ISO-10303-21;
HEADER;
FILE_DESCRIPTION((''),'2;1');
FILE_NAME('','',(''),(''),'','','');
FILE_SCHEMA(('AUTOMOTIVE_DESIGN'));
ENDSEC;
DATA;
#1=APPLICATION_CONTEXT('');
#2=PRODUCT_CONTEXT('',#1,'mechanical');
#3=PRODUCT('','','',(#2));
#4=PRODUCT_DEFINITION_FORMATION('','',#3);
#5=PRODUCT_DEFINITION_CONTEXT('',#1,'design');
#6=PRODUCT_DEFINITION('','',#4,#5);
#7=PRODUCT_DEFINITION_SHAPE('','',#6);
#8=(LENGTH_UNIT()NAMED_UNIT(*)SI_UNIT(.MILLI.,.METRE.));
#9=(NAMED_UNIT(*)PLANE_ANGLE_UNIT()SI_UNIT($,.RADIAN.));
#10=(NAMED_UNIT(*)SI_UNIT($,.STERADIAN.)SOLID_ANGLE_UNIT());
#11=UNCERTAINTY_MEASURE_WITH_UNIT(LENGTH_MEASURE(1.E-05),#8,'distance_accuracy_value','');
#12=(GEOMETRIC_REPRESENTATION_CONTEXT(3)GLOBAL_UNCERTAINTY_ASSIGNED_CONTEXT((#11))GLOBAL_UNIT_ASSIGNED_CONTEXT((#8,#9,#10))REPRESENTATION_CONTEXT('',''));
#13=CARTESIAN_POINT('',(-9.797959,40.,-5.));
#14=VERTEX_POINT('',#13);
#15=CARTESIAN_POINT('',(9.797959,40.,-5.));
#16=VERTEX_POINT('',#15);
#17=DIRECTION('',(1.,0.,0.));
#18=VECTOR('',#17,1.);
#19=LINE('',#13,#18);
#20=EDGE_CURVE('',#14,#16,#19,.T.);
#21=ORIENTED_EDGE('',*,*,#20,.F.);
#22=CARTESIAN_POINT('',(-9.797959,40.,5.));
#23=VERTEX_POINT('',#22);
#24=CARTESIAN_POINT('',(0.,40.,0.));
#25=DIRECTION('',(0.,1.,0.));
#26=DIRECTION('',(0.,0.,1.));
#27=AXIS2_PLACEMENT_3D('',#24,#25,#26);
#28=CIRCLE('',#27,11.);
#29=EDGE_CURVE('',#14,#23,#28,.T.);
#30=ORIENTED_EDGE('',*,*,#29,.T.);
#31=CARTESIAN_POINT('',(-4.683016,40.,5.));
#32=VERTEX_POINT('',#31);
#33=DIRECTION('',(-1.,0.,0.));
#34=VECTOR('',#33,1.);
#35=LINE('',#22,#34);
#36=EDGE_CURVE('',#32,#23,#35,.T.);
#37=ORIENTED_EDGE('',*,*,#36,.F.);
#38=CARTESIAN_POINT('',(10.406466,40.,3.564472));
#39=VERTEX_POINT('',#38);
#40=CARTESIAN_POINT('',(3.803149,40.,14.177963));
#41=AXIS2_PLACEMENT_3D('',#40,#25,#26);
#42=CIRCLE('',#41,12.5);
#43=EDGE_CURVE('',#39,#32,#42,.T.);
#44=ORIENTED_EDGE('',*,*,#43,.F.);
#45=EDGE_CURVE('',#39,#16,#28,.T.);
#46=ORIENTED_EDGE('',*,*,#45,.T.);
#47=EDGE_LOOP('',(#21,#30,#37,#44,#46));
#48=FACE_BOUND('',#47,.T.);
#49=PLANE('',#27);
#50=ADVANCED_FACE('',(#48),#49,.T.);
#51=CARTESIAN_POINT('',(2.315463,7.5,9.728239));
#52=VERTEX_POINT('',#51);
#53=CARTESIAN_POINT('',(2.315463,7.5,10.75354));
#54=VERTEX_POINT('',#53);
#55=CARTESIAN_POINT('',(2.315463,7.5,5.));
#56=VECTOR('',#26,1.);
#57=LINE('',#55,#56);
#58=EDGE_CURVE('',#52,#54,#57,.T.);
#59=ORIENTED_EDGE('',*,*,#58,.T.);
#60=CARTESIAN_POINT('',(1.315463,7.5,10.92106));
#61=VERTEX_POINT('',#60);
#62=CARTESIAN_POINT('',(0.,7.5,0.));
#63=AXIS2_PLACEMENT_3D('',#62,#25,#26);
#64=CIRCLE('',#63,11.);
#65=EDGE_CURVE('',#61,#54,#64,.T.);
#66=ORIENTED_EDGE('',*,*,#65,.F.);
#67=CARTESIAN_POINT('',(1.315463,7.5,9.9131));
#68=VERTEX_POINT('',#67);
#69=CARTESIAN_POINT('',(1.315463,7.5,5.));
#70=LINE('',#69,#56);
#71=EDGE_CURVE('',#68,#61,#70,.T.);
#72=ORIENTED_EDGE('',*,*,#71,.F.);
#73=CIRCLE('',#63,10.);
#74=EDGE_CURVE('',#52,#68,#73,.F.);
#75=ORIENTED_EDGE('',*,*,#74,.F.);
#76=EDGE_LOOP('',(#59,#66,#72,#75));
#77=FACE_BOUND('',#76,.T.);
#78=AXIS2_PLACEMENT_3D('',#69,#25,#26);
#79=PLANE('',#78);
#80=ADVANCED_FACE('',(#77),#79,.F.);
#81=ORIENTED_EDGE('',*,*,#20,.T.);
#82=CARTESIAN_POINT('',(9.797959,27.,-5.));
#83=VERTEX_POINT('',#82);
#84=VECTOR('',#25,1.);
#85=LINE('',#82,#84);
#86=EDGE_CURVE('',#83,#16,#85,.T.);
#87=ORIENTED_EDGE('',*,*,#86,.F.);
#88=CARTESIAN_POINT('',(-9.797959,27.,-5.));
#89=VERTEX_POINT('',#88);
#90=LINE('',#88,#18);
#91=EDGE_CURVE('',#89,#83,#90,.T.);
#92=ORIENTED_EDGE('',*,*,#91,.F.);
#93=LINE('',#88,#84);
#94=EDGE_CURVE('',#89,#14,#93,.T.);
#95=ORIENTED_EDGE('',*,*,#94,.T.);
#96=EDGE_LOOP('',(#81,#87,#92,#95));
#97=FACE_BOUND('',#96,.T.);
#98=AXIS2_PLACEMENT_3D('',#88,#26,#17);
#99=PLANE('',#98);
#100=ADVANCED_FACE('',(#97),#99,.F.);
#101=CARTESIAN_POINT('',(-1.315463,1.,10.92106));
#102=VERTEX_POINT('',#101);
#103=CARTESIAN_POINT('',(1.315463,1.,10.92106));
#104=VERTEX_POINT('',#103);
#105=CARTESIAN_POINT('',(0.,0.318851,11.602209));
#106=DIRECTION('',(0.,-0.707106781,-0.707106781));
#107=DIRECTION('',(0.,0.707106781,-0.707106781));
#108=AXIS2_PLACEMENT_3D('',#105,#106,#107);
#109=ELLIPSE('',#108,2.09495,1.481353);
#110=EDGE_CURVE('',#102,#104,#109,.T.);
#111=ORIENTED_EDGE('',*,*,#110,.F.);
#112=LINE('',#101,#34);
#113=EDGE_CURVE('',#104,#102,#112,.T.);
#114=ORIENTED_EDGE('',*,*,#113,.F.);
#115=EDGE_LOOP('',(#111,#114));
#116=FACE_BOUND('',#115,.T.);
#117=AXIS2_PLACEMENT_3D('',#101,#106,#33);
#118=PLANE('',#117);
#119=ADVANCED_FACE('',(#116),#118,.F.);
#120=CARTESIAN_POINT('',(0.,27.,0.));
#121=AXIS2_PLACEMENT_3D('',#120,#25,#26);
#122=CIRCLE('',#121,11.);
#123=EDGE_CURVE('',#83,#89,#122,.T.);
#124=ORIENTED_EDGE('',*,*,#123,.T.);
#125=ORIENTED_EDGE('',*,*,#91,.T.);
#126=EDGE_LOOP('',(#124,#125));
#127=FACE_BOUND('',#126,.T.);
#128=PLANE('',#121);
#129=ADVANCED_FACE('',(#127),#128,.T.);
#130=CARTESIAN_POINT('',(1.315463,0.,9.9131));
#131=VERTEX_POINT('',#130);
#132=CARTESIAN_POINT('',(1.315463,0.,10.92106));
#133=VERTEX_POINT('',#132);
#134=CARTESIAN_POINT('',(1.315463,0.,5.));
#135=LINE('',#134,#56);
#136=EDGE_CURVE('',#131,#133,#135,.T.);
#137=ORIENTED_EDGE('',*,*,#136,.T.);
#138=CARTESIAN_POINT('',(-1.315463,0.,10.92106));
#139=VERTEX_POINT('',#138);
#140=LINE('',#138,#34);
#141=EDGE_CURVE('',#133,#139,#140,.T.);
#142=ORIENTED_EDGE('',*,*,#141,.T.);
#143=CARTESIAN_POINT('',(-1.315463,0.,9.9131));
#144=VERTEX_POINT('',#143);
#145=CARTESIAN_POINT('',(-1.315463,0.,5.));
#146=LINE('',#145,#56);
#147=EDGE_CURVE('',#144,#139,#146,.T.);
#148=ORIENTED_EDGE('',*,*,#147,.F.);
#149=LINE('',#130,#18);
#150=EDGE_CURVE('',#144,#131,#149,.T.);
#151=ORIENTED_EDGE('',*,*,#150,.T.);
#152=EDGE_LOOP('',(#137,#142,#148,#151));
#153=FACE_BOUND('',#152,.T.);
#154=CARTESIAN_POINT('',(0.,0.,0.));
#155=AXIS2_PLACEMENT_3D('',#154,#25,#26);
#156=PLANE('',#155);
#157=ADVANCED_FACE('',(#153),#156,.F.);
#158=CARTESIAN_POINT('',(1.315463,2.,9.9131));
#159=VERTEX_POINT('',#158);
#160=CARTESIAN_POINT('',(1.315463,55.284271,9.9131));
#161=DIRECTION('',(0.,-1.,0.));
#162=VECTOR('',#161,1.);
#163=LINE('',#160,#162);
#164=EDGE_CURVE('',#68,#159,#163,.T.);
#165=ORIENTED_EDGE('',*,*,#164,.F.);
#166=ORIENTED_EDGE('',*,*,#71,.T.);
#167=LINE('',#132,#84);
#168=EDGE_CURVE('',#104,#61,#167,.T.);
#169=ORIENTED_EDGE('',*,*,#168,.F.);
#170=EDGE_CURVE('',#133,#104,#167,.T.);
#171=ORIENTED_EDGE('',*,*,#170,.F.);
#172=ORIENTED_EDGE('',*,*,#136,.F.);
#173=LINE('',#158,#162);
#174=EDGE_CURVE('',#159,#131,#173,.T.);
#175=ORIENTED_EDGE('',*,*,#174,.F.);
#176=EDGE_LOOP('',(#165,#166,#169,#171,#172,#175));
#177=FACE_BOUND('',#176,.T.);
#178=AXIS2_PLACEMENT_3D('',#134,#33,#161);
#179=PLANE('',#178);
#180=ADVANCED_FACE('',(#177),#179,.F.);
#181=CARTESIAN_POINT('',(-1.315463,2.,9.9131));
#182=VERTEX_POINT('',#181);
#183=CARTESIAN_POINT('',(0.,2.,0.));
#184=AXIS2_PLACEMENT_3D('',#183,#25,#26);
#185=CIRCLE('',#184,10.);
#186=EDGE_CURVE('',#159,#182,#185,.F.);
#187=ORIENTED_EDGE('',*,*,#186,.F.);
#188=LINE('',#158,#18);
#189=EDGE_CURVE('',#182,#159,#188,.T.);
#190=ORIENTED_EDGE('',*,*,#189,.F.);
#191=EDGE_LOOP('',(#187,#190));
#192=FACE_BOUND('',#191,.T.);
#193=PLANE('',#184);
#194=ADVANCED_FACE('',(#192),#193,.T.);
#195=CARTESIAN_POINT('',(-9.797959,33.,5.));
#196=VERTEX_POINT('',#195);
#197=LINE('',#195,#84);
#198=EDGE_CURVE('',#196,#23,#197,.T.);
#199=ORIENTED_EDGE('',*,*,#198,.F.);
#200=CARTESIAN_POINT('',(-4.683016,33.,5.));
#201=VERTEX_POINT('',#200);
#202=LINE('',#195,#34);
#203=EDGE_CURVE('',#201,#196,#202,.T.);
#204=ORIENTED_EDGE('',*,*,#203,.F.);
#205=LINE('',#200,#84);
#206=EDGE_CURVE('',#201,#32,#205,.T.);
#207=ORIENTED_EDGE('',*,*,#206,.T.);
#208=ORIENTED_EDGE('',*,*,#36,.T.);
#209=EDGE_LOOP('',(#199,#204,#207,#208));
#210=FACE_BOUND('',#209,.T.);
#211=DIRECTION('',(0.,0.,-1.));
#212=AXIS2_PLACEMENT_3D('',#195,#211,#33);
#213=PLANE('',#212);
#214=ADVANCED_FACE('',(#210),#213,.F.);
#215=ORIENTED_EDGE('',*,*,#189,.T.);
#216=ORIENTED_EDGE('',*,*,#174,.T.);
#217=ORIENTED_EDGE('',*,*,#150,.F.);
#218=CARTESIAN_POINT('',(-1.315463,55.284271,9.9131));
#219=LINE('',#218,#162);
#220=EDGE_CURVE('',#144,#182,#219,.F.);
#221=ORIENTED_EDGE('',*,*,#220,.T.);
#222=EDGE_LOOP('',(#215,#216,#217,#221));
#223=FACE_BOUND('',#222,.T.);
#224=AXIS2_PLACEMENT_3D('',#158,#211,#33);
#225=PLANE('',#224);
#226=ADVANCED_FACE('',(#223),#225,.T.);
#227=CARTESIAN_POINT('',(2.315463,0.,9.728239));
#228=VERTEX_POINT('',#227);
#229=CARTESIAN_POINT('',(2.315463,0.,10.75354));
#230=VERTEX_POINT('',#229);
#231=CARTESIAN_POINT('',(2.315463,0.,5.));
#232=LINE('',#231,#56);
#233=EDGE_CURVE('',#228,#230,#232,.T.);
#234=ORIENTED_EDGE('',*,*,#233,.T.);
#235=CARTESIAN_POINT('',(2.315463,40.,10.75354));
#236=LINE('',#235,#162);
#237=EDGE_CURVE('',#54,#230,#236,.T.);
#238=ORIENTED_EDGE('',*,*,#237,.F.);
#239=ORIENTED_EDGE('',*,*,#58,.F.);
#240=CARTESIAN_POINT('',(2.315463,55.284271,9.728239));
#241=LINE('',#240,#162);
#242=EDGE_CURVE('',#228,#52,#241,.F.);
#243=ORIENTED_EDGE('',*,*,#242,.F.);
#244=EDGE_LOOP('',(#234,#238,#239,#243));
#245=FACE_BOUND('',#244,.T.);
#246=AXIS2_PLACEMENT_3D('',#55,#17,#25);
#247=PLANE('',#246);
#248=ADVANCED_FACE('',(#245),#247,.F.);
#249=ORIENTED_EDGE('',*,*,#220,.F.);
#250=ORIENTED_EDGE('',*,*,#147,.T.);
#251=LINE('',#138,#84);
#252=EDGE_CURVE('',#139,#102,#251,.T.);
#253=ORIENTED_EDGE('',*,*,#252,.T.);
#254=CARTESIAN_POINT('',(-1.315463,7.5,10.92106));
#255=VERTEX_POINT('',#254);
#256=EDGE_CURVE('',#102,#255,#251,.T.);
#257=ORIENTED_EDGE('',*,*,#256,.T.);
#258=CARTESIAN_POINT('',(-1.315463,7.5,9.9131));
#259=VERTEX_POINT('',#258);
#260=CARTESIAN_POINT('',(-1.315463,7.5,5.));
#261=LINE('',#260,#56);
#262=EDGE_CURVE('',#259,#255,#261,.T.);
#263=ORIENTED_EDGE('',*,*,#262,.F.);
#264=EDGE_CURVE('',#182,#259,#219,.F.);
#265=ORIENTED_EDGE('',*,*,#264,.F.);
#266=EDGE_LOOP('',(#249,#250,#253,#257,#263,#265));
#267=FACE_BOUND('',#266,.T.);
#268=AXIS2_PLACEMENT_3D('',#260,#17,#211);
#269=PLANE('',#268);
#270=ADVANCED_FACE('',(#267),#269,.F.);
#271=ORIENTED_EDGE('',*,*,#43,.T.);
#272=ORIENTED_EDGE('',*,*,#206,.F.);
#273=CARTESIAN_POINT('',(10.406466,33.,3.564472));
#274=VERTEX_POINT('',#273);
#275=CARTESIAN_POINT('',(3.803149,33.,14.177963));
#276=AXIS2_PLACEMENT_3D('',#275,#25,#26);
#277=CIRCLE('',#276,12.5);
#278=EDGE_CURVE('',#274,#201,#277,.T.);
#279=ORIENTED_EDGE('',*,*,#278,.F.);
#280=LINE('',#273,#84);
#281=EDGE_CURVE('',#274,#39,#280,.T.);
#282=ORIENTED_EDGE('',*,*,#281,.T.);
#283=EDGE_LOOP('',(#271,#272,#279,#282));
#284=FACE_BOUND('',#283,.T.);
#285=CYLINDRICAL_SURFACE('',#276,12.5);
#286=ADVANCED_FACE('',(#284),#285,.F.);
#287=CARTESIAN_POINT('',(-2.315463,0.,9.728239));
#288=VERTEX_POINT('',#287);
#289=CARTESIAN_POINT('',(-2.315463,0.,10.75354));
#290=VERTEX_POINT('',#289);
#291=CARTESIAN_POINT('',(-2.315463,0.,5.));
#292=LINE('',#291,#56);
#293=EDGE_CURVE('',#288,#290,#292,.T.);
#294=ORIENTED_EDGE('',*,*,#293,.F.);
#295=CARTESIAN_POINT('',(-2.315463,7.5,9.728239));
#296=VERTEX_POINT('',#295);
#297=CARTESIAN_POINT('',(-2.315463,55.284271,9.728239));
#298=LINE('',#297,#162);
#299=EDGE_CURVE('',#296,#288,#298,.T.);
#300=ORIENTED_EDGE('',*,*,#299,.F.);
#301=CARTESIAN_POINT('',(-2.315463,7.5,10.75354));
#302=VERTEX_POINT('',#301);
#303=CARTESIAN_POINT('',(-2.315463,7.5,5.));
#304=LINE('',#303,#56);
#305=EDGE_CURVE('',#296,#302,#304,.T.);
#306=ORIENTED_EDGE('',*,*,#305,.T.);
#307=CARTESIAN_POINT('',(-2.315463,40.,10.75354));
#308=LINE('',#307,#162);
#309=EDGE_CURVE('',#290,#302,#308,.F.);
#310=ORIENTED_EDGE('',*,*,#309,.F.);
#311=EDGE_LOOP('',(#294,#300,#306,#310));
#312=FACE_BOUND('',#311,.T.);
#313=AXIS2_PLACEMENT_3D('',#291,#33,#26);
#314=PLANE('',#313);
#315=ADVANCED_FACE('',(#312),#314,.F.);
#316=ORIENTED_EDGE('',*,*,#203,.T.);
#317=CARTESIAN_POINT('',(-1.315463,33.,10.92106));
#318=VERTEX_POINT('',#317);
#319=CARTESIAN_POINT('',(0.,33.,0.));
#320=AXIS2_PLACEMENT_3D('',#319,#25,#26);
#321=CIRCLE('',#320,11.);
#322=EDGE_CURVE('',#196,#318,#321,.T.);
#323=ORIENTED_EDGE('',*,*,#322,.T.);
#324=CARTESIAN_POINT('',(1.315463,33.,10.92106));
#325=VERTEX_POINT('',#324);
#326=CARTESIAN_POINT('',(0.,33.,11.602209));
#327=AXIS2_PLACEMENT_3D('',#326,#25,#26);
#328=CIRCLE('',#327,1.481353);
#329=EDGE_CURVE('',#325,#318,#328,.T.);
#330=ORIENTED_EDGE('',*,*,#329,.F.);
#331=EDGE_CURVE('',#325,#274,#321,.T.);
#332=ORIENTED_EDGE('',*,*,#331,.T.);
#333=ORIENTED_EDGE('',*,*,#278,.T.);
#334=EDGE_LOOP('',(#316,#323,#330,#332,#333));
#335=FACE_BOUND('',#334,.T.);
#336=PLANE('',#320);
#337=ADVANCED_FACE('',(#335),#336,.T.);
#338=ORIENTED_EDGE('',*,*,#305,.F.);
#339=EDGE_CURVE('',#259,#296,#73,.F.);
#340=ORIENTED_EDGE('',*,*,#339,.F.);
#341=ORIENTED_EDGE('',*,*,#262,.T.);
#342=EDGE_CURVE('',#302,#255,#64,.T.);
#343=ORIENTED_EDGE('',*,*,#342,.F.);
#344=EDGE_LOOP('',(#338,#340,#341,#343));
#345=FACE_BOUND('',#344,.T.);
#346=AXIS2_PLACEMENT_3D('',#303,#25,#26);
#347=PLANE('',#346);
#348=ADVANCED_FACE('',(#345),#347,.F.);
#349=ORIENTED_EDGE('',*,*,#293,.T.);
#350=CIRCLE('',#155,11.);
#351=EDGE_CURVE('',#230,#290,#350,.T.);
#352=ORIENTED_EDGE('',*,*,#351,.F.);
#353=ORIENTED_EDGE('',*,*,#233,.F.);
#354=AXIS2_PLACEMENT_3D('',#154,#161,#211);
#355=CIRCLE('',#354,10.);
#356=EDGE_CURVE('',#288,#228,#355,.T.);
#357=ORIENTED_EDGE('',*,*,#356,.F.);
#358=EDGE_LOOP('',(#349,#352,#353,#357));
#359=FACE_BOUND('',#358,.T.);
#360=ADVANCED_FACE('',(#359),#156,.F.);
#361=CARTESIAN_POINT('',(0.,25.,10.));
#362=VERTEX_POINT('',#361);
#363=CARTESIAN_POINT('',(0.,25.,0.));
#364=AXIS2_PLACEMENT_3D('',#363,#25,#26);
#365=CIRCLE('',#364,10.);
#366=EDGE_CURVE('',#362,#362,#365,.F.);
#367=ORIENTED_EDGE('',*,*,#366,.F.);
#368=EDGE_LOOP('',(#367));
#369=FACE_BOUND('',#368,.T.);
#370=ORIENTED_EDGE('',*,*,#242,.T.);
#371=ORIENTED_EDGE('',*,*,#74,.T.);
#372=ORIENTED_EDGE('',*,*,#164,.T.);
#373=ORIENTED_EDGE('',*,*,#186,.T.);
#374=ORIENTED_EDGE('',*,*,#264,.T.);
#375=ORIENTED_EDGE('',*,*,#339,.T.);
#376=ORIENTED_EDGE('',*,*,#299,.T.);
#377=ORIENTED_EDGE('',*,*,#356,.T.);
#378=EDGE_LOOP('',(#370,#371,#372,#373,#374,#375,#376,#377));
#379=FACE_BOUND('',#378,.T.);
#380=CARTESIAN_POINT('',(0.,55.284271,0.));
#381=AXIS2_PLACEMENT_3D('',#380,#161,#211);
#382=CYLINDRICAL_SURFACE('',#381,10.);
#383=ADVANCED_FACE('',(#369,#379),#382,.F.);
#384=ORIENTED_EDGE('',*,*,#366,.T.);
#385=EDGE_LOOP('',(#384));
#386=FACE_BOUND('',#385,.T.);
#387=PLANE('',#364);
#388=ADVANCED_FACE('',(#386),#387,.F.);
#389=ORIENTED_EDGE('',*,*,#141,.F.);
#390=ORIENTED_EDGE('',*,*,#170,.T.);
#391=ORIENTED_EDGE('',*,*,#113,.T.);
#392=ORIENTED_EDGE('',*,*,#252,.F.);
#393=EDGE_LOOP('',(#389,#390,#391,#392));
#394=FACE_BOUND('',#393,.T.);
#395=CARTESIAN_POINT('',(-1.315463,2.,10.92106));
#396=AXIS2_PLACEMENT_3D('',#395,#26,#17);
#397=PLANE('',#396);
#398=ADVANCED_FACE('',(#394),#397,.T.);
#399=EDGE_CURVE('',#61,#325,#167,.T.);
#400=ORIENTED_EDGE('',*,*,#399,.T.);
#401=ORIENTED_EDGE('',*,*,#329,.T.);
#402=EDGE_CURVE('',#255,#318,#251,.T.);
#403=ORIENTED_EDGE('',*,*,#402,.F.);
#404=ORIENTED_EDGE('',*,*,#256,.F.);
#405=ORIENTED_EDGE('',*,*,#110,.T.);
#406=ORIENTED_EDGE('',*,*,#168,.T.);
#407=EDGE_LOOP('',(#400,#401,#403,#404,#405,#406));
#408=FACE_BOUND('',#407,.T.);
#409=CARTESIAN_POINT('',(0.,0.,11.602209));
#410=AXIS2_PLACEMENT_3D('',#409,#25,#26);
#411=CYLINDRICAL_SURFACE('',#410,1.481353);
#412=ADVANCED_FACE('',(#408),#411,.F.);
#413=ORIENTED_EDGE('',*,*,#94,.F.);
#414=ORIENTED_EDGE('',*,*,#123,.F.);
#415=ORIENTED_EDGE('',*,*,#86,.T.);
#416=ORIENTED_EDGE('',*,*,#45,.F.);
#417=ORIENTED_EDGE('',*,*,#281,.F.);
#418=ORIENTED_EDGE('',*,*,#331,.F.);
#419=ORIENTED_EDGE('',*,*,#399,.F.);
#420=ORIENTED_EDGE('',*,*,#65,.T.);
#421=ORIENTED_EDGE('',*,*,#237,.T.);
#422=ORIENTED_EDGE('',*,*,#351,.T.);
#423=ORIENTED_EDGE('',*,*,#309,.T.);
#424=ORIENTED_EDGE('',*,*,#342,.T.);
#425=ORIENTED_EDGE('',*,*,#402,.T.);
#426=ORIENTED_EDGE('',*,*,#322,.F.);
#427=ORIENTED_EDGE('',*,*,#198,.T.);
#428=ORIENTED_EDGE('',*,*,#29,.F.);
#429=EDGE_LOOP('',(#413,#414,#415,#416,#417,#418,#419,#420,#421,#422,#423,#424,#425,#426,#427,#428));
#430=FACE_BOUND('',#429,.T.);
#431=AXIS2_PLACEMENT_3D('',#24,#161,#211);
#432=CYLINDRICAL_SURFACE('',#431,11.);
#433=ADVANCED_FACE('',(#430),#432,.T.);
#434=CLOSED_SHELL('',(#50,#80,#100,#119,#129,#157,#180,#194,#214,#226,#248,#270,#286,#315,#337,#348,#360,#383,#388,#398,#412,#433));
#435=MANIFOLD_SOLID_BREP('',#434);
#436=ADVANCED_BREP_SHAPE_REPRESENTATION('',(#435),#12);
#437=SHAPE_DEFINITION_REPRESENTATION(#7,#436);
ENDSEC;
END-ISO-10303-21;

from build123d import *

# Parameters (mm, degrees)
SKETCH1_R           = 11
BOSS_EXTRUDE1_DEPTH = 40
CUT_EXTRUDE1_START  = -13
CUT_EXTRUDE1_DEPTH  = 13
CUT_EXTRUDE2_START  = -7
CUT_EXTRUDE2_DEPTH  = 7
CUT_EXTRUDE3_DEPTH  = 37.482872694
SKETCH6_R           = 10
CUT_EXTRUDE4_DEPTH  = 25
SKETCH7_W           = 1
SKETCH7_H           = 7.5
CUT_EXTRUDE5_DEPTH  = 7
SKETCH8_W           = 2.630926858
SKETCH8_H           = 1.007959983
BOSS_EXTRUDE2_DEPTH = 2
CHAMFER1_SIZE       = 1


with BuildPart() as part:
    # Sketch1 → Boss-Extrude1 (new body)
    with BuildSketch(Plane(origin=(0, 0, 0), x_dir=(1, 0, 0), z_dir=(0, 1, 0))):
        with Locations(Location((0, 0, 0), (0, 0, 270))):
            Circle(SKETCH1_R)
    extrude(amount=BOSS_EXTRUDE1_DEPTH)

    # Sketch2 → Cut-Extrude1 (cut)
    with BuildSketch(Plane(origin=(0, 40, 0), x_dir=(1, 0, 0), z_dir=(0, 1, 0)).offset(CUT_EXTRUDE1_START)):
        with BuildLine():
            Line((-9.797958971, 5), (9.797958971, 5))
            ThreePointArc((9.797958971, 5), (0, 11), (-9.797958971, 5))
        make_face()
    extrude(amount=CUT_EXTRUDE1_DEPTH, mode=Mode.SUBTRACT)

    # Sketch3 → Cut-Extrude2 (cut)
    with BuildSketch(Plane(origin=(0, 40, 0), x_dir=(1, 0, 0), z_dir=(0, 1, 0)).offset(CUT_EXTRUDE2_START)):
        with BuildLine():
            Line((-9.797958971, -5), (-4.683015841, -5))
            ThreePointArc((-4.683015841, -5), (2.619314521, -1.734147983), (10.406466307, -3.564471772))
            ThreePointArc((10.406466307, -3.564471772), (0.779586825, -10.972339968), (-9.797958971, -5))
        make_face()
    extrude(amount=CUT_EXTRUDE2_DEPTH, mode=Mode.SUBTRACT)

    # Sketch4 → Cut-Extrude3 (cut, through all)
    with BuildSketch(Plane(origin=(0, 33, 0), x_dir=(1, 0, 0), z_dir=(0, 1, 0))):
        with BuildLine():
            ThreePointArc((1.315463429, -10.921060203), (0, -10.120855836), (-1.315463429, -10.921060203))
            ThreePointArc((-1.315463429, -10.921060203), (0, -11), (1.315463429, -10.921060203))
        make_face()
    extrude(amount=-CUT_EXTRUDE3_DEPTH, mode=Mode.SUBTRACT)

    # Sketch6 → Cut-Extrude4 (cut)
    with BuildSketch(Plane.XZ):
        with Locations(Location((0, 0, 0), (0, 0, 270))):
            Circle(SKETCH6_R)
    extrude(amount=-CUT_EXTRUDE4_DEPTH, mode=Mode.SUBTRACT)

    # Sketch7 → Cut-Extrude5 (cut)
    with BuildSketch(Plane.XY.offset(12)):
        with Locations((-1.815463429, 3.75)):
            Rectangle(SKETCH7_W, SKETCH7_H)
        with Locations((1.815463429, 3.75)):
            Rectangle(SKETCH7_W, SKETCH7_H)
    extrude(amount=-CUT_EXTRUDE5_DEPTH, mode=Mode.SUBTRACT)

    # Sketch8 → Boss-Extrude2 (add)
    with BuildSketch(Plane.XZ):
        with Locations((0, 10.417080212)):
            Rectangle(SKETCH8_W, SKETCH8_H)
    extrude(amount=-BOSS_EXTRUDE2_DEPTH)

    # Chamfer1
    # the kernel refuses this chamfer: 1 mm, written as the material it takes off along each edge
    with BuildSketch(Plane(origin=(-3.887146417, 2, 10.921060203), x_dir=(-9.448986822191204e-15, 0.02749587661058651, -0.9996219169112968), z_dir=(1, 0, 0))) as chamfer1_piece_1_section:
        Polygon((CHAMFER1_SIZE * 0.999621916911, -CHAMFER1_SIZE * 0.0274958766106), (-CHAMFER1_SIZE * 0.0274958766106, -CHAMFER1_SIZE * 0.999621916911), (0, 0), align=None)
    chamfer1_piece_1 = extrude(amount=7.774292833, mode=Mode.PRIVATE)
    chamfer1_piece_1 = chamfer1_piece_1 & Plane(origin=(0, 1.631347526, 11.602209324), x_dir=(0.8880145347419771, 0, -0.45981538261240235), z_dir=(0, 1, 0)) * Cylinder(1.481353488, 20, mode=Mode.PRIVATE)
    add(chamfer1_piece_1, mode=Mode.SUBTRACT)


solid = part.part
